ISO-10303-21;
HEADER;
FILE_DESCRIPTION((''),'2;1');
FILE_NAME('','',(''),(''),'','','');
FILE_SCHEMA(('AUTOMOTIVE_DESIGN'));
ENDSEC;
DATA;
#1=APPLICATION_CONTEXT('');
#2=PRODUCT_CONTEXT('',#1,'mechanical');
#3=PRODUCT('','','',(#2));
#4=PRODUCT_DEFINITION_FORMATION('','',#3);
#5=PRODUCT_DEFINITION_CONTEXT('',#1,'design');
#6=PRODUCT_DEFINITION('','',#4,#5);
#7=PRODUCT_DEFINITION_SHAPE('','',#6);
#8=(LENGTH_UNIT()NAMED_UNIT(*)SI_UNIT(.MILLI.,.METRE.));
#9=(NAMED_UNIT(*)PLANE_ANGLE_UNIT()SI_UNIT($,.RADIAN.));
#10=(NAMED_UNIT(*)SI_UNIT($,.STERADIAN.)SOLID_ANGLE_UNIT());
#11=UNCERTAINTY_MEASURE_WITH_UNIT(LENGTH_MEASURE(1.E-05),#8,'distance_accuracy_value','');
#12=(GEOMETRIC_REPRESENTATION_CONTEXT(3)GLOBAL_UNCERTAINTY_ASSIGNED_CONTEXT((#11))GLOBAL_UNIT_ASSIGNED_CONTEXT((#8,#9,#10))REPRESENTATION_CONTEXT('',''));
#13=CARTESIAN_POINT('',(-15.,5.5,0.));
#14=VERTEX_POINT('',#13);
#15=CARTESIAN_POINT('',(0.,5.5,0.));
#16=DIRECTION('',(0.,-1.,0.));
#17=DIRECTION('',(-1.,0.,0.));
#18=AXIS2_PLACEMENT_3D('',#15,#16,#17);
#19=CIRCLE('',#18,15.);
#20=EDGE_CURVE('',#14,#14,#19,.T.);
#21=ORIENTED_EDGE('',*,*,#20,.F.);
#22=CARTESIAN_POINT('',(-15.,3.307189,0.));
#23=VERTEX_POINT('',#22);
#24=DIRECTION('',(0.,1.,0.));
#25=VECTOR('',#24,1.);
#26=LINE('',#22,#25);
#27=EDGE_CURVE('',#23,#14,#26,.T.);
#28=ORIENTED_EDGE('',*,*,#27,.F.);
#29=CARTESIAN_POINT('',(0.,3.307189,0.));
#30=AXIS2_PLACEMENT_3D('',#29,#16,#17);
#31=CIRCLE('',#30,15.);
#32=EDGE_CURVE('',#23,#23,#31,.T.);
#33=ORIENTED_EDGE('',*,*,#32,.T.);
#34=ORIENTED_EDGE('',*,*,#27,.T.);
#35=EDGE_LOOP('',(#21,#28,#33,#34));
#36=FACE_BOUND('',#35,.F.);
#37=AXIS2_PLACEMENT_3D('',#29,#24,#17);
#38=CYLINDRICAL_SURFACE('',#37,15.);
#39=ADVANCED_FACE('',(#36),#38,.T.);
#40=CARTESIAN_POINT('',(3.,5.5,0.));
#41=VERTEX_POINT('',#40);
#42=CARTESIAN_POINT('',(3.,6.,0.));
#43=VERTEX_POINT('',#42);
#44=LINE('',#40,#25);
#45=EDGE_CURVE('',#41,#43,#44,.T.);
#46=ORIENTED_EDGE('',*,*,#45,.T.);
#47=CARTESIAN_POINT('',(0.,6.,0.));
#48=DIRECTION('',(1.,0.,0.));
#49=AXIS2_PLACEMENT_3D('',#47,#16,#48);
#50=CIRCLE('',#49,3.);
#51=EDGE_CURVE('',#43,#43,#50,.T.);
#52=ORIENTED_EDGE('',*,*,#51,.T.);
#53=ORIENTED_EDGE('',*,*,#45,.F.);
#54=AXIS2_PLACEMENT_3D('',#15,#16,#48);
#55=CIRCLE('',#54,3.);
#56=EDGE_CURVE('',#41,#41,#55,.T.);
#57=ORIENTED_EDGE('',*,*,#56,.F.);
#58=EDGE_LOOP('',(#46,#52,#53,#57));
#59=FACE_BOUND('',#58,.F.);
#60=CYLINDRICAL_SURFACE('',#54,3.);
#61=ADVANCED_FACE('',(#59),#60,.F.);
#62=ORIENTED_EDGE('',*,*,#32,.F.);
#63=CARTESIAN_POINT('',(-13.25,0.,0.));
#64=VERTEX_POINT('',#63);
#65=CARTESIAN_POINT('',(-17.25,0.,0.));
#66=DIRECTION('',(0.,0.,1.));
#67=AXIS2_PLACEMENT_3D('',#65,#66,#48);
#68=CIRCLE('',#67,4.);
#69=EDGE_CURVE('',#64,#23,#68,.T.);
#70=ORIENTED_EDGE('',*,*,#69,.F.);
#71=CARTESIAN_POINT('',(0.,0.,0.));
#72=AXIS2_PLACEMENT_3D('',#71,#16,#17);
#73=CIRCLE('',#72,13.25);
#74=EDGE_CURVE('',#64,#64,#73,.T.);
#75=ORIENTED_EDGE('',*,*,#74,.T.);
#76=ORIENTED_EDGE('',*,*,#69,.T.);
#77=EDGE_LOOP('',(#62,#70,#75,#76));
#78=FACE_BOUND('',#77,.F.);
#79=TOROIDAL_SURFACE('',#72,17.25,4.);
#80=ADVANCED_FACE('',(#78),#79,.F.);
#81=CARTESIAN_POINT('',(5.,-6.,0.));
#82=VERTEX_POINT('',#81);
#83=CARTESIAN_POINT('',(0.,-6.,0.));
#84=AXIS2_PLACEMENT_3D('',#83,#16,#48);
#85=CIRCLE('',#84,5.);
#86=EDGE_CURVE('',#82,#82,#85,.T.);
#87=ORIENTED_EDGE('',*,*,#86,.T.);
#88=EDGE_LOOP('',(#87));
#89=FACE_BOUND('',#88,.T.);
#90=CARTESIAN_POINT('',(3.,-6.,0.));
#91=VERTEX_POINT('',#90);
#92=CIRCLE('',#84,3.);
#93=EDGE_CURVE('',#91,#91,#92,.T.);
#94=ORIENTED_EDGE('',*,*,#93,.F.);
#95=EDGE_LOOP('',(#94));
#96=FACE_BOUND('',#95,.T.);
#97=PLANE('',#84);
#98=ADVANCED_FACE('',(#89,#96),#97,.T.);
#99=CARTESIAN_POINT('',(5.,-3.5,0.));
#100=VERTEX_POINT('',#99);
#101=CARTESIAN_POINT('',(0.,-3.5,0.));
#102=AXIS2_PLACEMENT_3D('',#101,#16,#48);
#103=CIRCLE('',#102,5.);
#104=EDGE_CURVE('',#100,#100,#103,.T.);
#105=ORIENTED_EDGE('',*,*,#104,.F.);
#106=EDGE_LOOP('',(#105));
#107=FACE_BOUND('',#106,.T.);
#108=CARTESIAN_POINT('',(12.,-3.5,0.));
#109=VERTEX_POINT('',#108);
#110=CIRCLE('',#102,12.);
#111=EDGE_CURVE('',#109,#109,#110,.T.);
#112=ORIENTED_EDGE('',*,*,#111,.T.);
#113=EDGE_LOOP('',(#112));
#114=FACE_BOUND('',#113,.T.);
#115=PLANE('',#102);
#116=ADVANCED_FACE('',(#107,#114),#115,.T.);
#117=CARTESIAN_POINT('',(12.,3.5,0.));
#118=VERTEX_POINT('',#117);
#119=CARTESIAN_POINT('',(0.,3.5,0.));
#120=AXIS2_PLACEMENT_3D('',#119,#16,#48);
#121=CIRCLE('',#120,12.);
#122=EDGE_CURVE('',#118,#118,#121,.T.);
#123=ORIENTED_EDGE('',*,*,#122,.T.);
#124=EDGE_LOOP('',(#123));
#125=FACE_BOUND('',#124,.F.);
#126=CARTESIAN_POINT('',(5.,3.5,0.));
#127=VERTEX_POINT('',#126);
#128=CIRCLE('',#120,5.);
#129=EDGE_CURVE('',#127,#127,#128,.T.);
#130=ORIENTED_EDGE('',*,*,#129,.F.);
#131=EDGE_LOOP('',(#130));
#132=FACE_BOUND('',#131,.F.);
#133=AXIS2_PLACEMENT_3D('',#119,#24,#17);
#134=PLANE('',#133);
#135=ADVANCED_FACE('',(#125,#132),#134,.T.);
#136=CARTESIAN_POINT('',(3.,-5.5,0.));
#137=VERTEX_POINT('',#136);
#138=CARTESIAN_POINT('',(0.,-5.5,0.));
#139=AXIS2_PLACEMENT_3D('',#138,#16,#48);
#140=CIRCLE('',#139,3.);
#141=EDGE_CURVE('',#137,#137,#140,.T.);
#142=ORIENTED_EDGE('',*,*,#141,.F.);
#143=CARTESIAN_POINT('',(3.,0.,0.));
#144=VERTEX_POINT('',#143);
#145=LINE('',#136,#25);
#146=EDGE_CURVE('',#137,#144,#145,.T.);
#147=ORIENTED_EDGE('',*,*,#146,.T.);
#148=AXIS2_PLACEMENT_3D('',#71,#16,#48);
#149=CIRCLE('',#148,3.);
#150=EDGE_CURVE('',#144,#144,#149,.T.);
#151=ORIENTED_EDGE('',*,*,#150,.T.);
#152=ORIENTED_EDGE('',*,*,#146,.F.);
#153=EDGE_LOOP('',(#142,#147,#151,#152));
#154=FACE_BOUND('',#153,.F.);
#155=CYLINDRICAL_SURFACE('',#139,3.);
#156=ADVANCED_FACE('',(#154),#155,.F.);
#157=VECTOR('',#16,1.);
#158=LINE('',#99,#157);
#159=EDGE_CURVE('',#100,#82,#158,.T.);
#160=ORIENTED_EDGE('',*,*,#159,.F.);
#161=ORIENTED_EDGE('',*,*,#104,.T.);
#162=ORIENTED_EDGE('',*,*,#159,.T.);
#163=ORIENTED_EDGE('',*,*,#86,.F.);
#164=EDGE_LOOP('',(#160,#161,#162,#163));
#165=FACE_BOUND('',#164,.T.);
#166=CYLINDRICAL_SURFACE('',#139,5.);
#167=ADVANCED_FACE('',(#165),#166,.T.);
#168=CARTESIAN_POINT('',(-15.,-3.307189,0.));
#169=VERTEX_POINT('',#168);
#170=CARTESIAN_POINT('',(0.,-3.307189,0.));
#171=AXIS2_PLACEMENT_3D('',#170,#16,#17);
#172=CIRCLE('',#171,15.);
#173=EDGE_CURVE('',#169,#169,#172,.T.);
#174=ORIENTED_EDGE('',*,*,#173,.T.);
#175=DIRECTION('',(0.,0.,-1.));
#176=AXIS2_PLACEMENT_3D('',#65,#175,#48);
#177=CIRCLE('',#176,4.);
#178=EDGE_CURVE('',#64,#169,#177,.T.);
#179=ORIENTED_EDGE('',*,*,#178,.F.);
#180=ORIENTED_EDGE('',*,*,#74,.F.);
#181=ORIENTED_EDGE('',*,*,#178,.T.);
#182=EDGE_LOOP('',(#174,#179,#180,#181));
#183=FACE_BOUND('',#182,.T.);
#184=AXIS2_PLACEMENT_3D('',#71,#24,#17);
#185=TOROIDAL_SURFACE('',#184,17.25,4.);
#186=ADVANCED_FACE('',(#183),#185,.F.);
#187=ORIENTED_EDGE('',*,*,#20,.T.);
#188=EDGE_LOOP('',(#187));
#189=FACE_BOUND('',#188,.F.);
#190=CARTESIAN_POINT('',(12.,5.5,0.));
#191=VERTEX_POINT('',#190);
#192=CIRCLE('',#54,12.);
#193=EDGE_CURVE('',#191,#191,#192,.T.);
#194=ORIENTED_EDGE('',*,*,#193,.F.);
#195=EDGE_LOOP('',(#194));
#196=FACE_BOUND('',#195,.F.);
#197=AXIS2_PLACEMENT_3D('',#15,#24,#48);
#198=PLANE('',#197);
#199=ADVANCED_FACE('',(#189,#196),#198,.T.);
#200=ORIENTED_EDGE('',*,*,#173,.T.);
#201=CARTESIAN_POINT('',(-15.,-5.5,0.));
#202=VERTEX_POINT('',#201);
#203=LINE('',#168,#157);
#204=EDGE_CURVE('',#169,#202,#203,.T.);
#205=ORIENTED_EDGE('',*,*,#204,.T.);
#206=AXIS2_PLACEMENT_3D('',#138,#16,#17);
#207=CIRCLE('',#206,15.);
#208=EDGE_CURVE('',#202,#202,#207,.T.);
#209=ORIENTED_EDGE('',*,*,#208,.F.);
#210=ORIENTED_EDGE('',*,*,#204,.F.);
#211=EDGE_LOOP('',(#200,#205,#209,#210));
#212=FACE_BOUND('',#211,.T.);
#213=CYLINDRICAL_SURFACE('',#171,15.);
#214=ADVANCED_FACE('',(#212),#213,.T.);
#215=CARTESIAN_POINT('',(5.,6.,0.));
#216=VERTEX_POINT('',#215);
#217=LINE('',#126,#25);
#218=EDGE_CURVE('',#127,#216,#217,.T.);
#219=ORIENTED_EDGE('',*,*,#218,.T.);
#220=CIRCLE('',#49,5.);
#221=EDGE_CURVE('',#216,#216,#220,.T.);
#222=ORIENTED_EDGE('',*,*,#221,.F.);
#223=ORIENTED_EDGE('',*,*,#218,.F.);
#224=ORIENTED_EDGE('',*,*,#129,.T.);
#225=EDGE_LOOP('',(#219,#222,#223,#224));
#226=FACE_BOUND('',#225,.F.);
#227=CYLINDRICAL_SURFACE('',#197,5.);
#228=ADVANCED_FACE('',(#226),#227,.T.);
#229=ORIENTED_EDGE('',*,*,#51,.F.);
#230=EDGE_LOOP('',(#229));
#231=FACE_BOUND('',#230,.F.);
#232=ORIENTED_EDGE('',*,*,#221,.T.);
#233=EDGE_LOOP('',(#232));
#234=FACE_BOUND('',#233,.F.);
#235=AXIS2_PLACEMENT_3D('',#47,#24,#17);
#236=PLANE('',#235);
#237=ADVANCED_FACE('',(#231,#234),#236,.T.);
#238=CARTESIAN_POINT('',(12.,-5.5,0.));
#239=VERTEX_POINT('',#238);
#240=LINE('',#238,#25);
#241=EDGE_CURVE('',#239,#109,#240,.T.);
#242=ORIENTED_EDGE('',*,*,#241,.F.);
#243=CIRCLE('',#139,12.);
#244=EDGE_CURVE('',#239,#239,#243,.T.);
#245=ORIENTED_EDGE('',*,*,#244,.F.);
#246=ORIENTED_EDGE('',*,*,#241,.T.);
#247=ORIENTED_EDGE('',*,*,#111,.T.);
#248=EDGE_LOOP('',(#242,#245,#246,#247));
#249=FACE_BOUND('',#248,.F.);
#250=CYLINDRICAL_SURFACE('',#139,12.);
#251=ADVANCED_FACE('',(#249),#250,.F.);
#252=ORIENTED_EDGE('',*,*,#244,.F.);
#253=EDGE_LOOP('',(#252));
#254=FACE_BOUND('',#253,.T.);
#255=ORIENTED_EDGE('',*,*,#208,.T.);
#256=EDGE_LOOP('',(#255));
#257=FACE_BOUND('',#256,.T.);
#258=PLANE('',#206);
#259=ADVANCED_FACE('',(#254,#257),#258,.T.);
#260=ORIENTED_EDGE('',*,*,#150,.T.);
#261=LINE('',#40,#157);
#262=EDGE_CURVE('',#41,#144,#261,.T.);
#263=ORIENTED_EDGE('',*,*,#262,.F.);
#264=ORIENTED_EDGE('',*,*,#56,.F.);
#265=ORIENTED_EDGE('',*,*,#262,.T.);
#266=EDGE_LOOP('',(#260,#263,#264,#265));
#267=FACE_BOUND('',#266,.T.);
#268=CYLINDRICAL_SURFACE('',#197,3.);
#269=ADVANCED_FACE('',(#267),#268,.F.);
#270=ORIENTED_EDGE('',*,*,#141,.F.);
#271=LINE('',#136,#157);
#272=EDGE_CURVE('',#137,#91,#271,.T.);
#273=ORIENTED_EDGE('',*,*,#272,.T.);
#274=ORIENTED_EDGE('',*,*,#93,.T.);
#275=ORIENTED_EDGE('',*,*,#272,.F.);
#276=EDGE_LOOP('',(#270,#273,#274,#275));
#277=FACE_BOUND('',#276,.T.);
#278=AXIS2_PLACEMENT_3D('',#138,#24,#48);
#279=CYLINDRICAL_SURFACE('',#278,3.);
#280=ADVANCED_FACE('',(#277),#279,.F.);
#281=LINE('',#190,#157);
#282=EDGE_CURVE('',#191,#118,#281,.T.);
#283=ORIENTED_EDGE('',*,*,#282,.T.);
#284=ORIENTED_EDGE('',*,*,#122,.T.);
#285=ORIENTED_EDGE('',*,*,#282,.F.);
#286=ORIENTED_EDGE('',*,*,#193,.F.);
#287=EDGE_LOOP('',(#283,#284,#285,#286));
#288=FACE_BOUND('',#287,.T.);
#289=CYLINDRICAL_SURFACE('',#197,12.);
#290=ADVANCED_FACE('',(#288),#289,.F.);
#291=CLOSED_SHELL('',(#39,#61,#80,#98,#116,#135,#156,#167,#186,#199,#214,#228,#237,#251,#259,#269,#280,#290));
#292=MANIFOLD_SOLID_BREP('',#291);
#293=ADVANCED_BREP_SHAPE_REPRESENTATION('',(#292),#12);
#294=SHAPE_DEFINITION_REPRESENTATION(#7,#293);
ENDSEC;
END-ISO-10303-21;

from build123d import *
from build123d import SkipClean  # not in build123d's __all__

# Parameters (mm, degrees)
F2_R     = 5
F2_R_2   = 3
F3_DEPTH = 0.5
F2_R_3   = 12
F4_DEPTH = 2
F5_DEPTH = 25


with BuildPart() as f1:
    # F0 (on Top) → F1 (revolve)
    with BuildSketch(Plane.XY):
        with BuildLine():
            Line((0, -5.5), (0, 0))
            Line((0, 0), (-13.25, 0))
            ThreePointArc((-13.25, 0), (-13.7144660941, -1.8708286934), (-15, -3.3071891388))
            Line((-15, -3.3071891388), (-15, -5.5))
            Line((-15, -5.5), (0, -5.5))
        make_face()
    revolve(axis=Axis((0, -2.75, 0), (0, -1, 0)))

    # F2 (on face) → F3 (join)
    with BuildSketch(Plane.XZ.offset(5.5)):
        Circle(F2_R)
        Circle(F2_R_2, mode=Mode.SUBTRACT)
    extrude(amount=F3_DEPTH)

    # F2 (on face) → F4 (cut)
    with BuildSketch(Plane.XZ.offset(5.5)):
        Circle(F2_R_3)
        Circle(F2_R, mode=Mode.SUBTRACT)
    extrude(amount=-F4_DEPTH, mode=Mode.SUBTRACT)

    # F5 (cut): a face of the model
    f5_faces = [f1.faces().sort_by_distance(p)[0] for p in [
        (0, -5.5, 0),
    ]]
    extrude(f5_faces, amount=-F5_DEPTH, mode=Mode.SUBTRACT)

    # F6: F1 across plane


with BuildPart() as f1_1:
    add(f1.part, clean=False)
    with SkipClean():  # cleaning this boolean's faces spoils the solid; the shape is the same uncleaned
        add(f1.part.mirror(Plane.XZ), clean=False)


solid = f1_1.part
